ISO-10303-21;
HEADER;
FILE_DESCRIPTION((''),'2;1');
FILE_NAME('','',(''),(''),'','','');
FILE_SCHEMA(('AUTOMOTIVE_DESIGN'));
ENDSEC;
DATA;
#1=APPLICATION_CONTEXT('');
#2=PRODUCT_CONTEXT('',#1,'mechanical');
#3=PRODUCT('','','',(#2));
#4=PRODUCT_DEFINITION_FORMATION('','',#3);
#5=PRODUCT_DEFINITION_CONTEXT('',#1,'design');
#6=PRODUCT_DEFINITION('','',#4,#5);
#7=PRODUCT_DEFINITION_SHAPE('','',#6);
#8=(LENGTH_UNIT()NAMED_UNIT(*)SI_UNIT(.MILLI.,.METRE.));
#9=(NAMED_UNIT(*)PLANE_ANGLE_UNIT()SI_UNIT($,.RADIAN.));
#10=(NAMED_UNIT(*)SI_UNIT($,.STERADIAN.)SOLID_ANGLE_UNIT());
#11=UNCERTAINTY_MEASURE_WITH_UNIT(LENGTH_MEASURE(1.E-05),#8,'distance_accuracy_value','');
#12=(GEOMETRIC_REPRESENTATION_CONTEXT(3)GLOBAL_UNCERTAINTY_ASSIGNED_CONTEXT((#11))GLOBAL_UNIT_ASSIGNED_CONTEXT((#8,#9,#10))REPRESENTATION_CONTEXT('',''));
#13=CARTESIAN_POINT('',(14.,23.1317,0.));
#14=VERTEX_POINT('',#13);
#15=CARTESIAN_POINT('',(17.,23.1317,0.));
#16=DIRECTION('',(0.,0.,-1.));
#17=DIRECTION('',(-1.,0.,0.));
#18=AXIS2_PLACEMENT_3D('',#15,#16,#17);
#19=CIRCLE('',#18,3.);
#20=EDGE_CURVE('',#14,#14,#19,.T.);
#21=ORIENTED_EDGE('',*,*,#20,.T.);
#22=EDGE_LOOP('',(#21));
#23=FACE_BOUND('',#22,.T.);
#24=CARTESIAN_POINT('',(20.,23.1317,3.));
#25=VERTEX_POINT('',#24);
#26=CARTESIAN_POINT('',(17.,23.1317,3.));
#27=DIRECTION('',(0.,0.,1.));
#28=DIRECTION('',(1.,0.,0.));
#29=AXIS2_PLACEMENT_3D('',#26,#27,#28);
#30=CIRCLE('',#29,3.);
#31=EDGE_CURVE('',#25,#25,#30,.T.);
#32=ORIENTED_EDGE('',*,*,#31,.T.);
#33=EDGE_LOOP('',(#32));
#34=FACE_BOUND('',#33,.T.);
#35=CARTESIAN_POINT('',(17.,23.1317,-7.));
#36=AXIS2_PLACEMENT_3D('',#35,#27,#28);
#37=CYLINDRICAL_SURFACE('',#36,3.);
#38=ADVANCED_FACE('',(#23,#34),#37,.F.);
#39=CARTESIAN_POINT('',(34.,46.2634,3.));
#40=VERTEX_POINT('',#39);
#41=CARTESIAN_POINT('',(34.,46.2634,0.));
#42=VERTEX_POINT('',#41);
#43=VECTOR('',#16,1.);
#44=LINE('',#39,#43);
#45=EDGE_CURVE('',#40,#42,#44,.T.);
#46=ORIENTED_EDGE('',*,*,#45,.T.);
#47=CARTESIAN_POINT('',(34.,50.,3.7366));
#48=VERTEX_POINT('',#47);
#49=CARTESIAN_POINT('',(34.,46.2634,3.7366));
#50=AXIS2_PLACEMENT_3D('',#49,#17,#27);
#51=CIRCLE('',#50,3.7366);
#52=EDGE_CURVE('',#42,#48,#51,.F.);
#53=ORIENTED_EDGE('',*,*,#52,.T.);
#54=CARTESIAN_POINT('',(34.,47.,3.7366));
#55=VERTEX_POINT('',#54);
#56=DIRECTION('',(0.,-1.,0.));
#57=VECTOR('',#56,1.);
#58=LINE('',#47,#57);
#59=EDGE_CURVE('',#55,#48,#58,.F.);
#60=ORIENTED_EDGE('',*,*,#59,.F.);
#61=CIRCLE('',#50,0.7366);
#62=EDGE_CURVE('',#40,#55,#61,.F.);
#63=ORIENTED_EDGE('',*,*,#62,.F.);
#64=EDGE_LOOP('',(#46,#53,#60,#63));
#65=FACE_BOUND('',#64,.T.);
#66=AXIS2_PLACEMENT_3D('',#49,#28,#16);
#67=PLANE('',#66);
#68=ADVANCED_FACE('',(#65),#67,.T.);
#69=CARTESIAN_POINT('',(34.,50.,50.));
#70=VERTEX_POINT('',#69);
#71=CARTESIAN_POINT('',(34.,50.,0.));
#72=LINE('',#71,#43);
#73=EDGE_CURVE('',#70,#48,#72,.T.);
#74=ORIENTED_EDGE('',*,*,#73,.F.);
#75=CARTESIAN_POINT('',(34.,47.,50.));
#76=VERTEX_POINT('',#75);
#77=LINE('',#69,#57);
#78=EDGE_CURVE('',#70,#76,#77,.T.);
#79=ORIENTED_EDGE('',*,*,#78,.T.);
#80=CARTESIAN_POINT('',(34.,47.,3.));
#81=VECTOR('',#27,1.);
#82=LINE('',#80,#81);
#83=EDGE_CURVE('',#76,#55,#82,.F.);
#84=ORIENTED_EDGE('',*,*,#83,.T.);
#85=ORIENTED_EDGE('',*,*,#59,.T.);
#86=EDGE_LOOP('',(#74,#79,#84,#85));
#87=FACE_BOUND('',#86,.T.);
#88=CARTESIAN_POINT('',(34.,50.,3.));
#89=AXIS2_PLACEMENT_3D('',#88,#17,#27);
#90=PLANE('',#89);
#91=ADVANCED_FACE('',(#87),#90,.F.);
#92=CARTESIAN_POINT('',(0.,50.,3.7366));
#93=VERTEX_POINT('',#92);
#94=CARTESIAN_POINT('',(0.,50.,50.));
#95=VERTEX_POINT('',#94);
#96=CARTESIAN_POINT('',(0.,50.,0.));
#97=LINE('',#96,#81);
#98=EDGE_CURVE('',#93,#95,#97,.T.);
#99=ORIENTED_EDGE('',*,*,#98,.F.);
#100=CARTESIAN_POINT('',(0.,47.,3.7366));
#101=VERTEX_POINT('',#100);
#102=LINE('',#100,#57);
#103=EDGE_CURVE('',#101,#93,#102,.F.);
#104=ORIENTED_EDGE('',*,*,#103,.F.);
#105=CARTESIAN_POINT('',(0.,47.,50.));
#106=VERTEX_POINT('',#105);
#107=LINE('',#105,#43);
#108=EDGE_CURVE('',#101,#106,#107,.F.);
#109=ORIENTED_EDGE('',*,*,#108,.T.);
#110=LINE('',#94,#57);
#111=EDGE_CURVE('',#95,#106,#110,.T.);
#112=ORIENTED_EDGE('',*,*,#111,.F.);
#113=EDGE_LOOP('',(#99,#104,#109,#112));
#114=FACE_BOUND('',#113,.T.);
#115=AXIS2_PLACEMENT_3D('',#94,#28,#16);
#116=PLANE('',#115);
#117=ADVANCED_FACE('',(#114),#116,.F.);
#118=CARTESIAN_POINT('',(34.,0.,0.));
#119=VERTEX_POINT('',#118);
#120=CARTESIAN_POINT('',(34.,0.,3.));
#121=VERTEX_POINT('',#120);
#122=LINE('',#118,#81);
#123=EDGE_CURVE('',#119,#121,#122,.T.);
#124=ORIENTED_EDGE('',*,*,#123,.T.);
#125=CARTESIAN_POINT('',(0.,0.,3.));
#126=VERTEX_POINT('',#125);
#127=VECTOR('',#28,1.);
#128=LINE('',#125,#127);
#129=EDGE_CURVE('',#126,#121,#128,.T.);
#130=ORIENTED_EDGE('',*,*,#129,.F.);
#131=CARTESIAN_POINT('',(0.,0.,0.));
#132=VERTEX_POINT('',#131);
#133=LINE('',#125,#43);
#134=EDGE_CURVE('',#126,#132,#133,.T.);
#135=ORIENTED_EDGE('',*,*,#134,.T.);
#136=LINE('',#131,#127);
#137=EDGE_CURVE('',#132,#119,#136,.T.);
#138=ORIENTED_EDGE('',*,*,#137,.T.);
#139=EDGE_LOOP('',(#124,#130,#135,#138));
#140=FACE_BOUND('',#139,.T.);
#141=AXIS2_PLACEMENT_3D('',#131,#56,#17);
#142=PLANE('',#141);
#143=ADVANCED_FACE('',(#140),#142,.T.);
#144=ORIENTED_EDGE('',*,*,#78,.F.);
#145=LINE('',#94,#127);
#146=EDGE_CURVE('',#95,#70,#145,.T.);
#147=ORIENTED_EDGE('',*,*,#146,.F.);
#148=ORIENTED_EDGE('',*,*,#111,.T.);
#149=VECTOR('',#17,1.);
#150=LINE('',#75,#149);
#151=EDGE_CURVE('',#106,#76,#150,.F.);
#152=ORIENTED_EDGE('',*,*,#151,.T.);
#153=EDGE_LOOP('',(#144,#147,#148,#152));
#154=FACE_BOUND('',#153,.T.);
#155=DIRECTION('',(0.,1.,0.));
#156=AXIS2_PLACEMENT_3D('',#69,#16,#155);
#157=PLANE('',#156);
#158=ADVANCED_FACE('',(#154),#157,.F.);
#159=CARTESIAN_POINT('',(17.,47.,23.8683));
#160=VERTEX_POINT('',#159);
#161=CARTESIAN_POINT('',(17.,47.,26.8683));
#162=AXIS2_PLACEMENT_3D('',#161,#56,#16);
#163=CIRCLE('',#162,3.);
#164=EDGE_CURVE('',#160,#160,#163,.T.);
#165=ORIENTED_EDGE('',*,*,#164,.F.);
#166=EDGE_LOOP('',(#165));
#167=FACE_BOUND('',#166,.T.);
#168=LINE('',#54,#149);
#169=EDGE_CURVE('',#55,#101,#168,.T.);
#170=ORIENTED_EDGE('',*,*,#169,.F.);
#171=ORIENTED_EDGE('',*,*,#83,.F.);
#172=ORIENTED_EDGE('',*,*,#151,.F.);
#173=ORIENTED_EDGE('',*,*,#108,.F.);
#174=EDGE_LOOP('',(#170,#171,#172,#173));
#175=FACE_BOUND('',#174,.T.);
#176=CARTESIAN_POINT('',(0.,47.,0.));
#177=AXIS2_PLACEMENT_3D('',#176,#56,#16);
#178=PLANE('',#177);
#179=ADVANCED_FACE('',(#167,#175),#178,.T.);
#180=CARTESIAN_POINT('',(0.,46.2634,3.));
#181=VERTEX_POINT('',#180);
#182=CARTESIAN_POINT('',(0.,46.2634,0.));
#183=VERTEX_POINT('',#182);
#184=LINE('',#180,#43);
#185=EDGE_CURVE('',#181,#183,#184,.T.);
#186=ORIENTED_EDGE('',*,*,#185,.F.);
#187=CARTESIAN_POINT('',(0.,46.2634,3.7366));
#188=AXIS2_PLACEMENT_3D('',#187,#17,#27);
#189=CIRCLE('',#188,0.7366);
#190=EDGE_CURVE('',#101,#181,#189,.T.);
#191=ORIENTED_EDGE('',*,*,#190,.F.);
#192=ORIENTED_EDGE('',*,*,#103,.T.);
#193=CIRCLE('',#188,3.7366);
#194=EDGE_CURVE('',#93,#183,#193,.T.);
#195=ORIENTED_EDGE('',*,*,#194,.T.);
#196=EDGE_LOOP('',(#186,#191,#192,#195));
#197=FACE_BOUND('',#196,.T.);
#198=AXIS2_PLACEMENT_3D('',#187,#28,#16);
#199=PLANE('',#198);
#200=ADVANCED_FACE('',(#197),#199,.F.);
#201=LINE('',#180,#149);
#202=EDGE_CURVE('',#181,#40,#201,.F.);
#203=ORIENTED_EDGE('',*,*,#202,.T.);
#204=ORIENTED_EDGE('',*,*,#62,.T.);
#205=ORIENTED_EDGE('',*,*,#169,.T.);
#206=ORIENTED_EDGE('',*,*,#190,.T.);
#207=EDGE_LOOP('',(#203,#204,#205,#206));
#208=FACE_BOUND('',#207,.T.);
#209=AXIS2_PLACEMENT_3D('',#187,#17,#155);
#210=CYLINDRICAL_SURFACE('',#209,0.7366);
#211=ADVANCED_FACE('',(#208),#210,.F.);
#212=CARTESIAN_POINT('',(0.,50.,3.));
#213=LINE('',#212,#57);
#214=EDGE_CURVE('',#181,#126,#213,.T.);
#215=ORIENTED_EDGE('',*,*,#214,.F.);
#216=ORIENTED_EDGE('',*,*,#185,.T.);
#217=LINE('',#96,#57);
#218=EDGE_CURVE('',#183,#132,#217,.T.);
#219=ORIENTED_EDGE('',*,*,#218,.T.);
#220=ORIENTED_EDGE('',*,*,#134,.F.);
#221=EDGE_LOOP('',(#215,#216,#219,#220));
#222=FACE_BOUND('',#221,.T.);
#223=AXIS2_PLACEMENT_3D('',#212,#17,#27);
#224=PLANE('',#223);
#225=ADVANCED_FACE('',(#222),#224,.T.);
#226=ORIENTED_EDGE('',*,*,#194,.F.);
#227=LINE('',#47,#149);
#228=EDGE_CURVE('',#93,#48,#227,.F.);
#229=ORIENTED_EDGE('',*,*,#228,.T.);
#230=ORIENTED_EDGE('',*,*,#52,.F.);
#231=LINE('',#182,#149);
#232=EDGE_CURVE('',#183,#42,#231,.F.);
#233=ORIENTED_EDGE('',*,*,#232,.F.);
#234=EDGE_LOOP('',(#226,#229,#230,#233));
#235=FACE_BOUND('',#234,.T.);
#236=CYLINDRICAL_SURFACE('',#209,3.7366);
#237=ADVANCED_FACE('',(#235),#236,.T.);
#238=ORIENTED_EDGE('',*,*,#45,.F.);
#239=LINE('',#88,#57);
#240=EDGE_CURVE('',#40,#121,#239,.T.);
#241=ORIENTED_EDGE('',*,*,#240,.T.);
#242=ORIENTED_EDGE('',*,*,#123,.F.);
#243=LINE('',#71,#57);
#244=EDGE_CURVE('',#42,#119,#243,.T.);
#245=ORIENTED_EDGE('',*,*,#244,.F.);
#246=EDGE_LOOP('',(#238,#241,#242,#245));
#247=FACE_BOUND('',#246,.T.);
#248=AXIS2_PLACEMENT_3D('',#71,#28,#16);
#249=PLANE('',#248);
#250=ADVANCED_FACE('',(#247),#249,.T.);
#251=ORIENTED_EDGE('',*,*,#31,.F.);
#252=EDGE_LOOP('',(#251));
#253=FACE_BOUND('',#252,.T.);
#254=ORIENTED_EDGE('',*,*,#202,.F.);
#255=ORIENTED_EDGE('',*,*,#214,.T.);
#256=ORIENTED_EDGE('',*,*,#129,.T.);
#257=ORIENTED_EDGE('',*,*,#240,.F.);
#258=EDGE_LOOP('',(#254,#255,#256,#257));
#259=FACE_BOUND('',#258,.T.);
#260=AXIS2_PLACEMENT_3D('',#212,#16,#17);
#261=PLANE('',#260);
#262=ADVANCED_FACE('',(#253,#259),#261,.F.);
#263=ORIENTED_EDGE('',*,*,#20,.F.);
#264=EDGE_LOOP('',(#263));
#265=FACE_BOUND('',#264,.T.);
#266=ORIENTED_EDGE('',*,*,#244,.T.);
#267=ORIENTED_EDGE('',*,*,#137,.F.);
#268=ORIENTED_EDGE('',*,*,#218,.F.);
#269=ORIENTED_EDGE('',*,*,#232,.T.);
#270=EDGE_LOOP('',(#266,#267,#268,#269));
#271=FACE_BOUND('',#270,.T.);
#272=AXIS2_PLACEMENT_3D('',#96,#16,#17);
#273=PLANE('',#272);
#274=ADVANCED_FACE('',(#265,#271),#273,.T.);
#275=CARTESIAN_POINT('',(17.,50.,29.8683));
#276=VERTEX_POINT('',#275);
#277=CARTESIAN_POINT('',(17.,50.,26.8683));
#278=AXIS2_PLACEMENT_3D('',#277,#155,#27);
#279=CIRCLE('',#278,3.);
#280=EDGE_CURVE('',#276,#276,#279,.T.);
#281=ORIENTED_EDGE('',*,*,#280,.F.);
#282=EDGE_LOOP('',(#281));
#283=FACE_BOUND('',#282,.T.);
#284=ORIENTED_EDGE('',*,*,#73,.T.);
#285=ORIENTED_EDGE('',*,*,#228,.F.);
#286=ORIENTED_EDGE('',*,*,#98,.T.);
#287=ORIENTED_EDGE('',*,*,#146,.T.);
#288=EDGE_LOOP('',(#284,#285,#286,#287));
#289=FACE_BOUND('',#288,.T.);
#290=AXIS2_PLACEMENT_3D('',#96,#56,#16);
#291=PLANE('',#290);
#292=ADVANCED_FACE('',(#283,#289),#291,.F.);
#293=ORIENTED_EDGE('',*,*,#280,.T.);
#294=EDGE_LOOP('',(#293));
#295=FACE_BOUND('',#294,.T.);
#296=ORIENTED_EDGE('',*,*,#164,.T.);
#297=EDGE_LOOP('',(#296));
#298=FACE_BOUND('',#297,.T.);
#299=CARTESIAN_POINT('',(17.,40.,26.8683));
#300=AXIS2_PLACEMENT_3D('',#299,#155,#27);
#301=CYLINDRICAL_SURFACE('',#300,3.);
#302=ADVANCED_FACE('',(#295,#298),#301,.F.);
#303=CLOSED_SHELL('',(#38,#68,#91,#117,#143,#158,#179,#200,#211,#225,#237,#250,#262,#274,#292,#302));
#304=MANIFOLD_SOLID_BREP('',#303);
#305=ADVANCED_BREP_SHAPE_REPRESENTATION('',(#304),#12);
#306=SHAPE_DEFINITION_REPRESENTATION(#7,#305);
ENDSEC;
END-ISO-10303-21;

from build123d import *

# Parameters (mm, degrees)
SKETCH1_W                    = 34
SKETCH1_H                    = 3
BASE_FLANGE1_DEPTH           = 50
EDGE_FLANGE1_STRIP_W         = 13.4732
EDGE_FLANGE1_STRIP_H         = 3
EDGE_FLANGE1_STRIP_CUT_DEPTH = 34
EDGE_FLANGE1_DEPTH           = 34
SKETCH9_R                    = 3
CUT_EXTRUDE1_DEPTH           = 10
SKETCH10_R                   = 3
CUT_EXTRUDE2_DEPTH           = 10


# Sheet-metal steps are written as plain solids
with BuildPart() as part:
    # Sketch1 → Base-Flange1 (new body)
    with BuildSketch(Plane(origin=(0, 0, 0), x_dir=(1, 0, 0), z_dir=(0, 1, 0))):
        with Locations((17, -1.5)):
            Rectangle(SKETCH1_W, SKETCH1_H)
    extrude(amount=BASE_FLANGE1_DEPTH)

    # Edge-Flange1 strip (across the edge) → Edge-Flange1 strip cut (cut)
    with BuildSketch(Plane(origin=(34, 50, 3), x_dir=(0, -1, 0), z_dir=(-1, 0, 0))):
        with Locations((-3, -1.5)):
            Rectangle(EDGE_FLANGE1_STRIP_W, EDGE_FLANGE1_STRIP_H)
    extrude(amount=EDGE_FLANGE1_STRIP_CUT_DEPTH, mode=Mode.SUBTRACT)

    # Edge-Flange1 section (across the edge) → Edge-Flange1 (add)
    with BuildSketch(Plane(origin=(34, 50, 3), x_dir=(0, -1, 0), z_dir=(-1, 0, 0))):
        with BuildLine():
            Line((0, 0.7366), (0, 47))
            Line((0, 47), (3, 47))
            Line((3, 47), (3, 0.7366))
            ThreePointArc((3, 0.7366), (3.215745145, 0.215745145), (3.7366, 0))
            Line((3.7366, 0), (3.7366, -3))
            ThreePointArc((3.7366, -3), (1.094424801, -1.905575199), (0, 0.7366))
        make_face()
    extrude(amount=EDGE_FLANGE1_DEPTH)

    # Sketch9 → Cut-Extrude1 (cut)
    with BuildSketch(Plane(origin=(0, 50, 0), x_dir=(1, 0, 0), z_dir=(0, 1, 0))):
        with Locations(Location((17, -26.8683, 0), (0, 0, 270))):
            Circle(SKETCH9_R)
    extrude(amount=-CUT_EXTRUDE1_DEPTH, mode=Mode.SUBTRACT)

    # Sketch10 → Cut-Extrude2 (cut)
    with BuildSketch(Plane.XY.offset(3)):
        with Locations((17, 23.1317)):
            Circle(SKETCH10_R)
    extrude(amount=-CUT_EXTRUDE2_DEPTH, mode=Mode.SUBTRACT)


solid = part.part
